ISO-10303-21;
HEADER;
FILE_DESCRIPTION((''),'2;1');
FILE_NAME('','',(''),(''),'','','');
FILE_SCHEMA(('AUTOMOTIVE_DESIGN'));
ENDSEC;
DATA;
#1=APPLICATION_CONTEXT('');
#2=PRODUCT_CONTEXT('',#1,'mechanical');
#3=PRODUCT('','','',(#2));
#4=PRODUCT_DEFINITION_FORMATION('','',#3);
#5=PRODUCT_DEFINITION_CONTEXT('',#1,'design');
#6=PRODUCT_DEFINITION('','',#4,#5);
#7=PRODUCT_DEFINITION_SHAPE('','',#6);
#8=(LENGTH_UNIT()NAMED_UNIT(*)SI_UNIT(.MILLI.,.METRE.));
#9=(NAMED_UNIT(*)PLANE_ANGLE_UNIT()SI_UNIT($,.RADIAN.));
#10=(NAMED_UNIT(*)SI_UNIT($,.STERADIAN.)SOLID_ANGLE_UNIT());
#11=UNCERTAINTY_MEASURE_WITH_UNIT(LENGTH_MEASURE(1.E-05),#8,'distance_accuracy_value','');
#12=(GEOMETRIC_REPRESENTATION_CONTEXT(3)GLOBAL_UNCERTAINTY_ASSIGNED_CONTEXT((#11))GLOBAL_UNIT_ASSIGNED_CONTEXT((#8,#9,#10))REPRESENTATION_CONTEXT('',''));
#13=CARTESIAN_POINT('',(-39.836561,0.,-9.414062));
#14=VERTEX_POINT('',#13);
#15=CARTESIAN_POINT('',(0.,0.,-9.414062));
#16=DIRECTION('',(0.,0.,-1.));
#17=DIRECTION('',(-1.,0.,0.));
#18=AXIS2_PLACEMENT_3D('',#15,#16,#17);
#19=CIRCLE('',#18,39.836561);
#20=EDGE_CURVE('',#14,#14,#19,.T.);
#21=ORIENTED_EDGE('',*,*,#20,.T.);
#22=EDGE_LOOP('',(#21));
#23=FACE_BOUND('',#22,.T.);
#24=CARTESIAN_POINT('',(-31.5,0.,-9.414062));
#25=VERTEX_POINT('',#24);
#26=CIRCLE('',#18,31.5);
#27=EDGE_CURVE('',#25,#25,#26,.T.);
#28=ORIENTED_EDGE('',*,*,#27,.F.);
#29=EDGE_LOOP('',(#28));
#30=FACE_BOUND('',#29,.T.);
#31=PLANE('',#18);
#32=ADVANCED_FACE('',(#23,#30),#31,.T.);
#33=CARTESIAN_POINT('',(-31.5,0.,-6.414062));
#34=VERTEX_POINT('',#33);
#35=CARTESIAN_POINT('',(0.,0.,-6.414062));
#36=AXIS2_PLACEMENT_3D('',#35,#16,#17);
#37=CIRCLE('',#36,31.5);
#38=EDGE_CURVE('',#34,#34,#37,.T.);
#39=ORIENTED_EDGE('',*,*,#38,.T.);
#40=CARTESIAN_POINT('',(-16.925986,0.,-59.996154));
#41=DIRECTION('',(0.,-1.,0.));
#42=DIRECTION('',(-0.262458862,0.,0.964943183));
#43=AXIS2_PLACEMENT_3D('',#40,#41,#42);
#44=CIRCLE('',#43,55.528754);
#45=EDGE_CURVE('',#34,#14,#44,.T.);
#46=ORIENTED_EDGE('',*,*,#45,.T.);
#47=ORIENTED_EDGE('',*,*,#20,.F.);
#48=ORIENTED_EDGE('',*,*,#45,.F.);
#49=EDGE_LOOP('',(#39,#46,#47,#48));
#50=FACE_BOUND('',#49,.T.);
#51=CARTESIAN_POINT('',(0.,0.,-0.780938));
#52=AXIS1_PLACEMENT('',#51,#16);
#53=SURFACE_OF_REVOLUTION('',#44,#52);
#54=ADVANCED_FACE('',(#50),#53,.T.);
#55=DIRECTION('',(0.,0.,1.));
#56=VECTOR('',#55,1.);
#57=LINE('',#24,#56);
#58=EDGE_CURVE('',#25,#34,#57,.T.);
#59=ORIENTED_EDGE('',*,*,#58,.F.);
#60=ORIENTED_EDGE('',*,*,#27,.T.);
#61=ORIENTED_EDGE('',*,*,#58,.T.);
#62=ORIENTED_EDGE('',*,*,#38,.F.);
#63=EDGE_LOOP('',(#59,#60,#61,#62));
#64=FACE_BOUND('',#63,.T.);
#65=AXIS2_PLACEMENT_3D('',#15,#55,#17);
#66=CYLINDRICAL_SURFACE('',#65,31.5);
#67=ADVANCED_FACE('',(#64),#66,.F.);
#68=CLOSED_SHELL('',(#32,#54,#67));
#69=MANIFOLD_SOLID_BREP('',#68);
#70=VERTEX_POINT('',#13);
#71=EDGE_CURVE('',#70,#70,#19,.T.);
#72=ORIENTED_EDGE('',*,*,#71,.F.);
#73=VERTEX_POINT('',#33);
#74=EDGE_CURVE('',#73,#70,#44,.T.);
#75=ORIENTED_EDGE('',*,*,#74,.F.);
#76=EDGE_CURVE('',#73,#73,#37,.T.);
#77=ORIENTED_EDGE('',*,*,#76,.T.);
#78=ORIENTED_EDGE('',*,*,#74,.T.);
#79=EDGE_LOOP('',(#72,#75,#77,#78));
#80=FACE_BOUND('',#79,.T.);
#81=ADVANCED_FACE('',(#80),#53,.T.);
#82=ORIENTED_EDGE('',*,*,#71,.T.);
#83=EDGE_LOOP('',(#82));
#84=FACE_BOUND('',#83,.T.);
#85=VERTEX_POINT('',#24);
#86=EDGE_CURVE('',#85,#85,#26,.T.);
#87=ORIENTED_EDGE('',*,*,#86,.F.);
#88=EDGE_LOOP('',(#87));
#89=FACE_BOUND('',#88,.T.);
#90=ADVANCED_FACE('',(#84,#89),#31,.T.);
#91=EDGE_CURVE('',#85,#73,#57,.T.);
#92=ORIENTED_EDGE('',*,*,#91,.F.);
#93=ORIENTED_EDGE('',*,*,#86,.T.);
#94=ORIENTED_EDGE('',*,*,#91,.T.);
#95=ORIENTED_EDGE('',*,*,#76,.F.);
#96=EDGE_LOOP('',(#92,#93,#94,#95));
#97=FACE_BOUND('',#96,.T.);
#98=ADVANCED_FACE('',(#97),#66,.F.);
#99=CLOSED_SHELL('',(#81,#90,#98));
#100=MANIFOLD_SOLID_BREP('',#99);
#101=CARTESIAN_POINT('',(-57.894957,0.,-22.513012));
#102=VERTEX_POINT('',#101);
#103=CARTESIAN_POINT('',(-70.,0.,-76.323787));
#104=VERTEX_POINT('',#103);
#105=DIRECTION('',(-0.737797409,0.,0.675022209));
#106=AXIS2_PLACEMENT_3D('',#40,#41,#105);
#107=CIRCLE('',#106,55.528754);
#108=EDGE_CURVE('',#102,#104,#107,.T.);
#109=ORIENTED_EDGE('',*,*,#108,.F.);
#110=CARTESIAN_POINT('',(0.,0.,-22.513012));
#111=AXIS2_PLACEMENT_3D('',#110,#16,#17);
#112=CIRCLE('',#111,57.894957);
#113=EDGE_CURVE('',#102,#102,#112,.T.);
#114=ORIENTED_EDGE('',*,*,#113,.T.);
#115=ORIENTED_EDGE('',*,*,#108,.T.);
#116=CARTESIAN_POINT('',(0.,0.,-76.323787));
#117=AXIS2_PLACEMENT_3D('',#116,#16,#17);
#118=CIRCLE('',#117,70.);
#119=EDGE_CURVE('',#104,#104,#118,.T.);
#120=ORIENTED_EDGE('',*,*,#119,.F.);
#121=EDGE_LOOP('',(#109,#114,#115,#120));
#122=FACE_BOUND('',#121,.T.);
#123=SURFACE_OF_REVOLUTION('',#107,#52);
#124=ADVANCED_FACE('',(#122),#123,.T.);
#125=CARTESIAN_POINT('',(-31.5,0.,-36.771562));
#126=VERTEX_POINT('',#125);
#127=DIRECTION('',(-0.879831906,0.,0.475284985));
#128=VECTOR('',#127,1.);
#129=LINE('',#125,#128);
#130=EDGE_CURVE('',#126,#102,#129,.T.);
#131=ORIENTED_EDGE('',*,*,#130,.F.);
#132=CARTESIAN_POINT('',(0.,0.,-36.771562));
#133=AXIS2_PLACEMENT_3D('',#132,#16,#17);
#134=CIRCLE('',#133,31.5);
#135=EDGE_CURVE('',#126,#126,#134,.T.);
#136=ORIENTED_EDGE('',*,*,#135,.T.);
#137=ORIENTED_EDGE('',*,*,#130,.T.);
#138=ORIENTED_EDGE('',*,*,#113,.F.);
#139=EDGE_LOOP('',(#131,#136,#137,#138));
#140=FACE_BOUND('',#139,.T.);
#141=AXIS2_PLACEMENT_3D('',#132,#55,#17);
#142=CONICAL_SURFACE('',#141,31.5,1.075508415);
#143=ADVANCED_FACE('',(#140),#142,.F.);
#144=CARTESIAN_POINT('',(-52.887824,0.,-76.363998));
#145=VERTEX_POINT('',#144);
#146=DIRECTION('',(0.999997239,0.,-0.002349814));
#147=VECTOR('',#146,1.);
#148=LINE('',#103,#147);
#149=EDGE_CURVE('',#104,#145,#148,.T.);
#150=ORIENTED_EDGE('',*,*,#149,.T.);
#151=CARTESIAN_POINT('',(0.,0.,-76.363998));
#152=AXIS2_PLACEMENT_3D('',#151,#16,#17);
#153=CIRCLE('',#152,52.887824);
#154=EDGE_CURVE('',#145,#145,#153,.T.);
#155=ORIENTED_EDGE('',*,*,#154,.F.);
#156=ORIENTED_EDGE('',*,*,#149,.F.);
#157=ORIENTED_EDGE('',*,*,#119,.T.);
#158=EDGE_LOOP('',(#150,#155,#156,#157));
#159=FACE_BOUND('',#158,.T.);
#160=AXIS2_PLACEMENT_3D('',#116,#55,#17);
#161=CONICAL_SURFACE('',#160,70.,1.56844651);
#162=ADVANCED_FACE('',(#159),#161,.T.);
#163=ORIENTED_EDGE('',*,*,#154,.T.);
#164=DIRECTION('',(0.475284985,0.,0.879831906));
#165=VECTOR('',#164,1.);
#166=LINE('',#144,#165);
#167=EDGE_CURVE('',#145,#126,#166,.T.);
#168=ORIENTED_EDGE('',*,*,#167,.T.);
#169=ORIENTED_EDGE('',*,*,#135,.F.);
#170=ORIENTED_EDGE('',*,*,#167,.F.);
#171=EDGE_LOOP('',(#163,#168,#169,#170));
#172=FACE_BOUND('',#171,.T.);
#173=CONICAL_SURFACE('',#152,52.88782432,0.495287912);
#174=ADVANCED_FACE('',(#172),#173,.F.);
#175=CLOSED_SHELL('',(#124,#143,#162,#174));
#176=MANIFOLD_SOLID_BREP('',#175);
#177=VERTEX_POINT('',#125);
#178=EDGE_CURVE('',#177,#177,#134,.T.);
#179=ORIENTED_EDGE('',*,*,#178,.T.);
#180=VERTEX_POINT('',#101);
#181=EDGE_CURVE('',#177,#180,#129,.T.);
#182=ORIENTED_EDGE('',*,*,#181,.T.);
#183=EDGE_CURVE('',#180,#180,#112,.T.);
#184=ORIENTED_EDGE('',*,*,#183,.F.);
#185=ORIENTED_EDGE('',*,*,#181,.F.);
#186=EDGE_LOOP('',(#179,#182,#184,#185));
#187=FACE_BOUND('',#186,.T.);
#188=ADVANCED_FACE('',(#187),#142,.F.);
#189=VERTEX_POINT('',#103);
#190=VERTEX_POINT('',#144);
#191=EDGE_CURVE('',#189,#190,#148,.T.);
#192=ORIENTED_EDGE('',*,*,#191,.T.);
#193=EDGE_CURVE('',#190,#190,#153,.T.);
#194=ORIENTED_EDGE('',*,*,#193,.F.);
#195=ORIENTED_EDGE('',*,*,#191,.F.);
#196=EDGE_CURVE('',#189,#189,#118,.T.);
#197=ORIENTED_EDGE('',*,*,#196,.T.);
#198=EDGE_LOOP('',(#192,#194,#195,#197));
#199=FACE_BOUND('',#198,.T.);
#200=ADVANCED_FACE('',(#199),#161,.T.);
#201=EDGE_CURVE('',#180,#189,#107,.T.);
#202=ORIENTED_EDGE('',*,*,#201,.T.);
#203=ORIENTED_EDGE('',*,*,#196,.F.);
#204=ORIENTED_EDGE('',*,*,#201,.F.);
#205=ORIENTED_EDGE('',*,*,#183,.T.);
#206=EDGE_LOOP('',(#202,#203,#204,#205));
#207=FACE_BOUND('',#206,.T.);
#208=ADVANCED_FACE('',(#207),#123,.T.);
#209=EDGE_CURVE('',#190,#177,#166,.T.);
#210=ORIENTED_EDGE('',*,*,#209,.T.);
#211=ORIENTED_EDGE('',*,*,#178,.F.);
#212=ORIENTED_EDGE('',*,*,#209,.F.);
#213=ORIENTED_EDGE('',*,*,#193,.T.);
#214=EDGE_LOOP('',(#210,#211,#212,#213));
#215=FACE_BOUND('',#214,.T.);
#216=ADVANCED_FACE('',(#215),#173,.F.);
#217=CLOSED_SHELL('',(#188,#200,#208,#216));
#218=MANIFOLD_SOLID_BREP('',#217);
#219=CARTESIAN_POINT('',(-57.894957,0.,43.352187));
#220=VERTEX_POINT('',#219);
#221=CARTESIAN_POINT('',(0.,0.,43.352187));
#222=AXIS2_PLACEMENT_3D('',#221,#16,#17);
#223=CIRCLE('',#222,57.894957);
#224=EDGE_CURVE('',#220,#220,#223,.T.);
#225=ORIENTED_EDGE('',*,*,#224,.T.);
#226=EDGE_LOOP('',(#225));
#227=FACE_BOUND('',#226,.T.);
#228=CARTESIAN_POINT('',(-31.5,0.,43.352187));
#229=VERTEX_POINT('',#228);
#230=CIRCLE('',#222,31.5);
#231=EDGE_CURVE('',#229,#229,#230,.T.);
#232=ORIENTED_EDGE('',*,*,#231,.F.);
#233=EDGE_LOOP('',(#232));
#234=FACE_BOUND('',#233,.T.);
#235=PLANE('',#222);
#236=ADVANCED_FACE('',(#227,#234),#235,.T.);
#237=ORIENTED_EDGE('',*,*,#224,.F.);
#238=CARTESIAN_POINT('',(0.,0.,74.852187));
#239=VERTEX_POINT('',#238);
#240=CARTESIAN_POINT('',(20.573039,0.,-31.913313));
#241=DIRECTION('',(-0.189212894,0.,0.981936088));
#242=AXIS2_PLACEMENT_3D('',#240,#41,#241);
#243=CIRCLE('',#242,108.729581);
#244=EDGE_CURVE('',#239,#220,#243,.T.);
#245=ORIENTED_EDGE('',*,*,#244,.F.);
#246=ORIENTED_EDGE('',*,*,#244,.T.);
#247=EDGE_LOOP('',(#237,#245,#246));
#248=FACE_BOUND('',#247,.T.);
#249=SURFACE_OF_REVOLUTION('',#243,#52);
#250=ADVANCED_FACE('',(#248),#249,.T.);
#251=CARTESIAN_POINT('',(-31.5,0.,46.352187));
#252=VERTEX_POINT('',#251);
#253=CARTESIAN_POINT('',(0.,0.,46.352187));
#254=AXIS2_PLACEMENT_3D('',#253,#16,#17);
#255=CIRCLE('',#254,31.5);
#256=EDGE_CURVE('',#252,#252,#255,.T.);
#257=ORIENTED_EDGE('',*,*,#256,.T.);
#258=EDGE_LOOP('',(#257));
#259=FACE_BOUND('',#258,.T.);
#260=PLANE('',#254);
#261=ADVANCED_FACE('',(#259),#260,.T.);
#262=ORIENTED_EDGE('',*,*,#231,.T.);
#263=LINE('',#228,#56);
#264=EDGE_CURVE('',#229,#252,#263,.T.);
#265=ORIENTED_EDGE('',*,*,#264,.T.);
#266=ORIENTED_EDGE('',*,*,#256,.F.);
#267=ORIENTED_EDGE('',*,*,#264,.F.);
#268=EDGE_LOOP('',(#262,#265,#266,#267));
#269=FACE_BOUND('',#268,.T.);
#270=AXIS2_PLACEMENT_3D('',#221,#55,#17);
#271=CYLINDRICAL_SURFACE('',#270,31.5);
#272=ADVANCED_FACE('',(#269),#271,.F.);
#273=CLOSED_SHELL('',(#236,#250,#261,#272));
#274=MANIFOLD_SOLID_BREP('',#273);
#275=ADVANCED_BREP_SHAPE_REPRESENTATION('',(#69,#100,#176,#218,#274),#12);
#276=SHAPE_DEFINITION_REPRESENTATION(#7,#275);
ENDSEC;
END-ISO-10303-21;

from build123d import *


# Not quite as in the source:
# - the program builds the solid bodies; features that only make, move or delete a surface that nothing else refers to are left out


with BuildPart() as f1:
    # F0 (on Front) → F1 (revolve)
    with BuildSketch(Plane.XZ):
        with BuildLine():
            Line((-31.5, -36.7715619504), (-57.8949571854, -22.5130124036))
            ThreePointArc((-57.8949571854, -22.5130124036), (-71.100893869, -47.8091979463), (-70, -76.3237871839))
            Line((-70, -76.3237871839), (-52.8878243203, -76.3639977286))
            Line((-52.8878243203, -76.3639977286), (-31.5, -36.7715619504))
        make_face()
    revolve(axis=Axis((0, 0, -0.7809376717), (0, 0, -1)))


with BuildPart() as f3:
    # F0 (on Front) → F3 (revolve)
    with BuildSketch(Plane.XZ):
        with BuildLine():
            Line((-31.5, -9.4140620232), (-31.5, -6.4140620232))
            ThreePointArc((-31.5, -6.4140620232), (-35.7282093513, -7.7475284985), (-39.836560988, -9.4140620232))
            Line((-39.836560988, -9.4140620232), (-31.5, -9.4140620232))
        make_face()
    revolve(axis=Axis((0, 0, -0.7809376717), (0, 0, -1)))


with BuildPart() as f3b:
    # F0 (on Front) → F3, piece 2 (revolve)
    with BuildSketch(Plane.XZ):
        with BuildLine():
            Line((-31.5, -36.7715619504), (-57.8949571854, -22.5130124036))
            ThreePointArc((-57.8949571854, -22.5130124036), (-71.100893869, -47.8091979463), (-70, -76.3237871839))
            Line((-70, -76.3237871839), (-52.8878243203, -76.3639977286))
            Line((-52.8878243203, -76.3639977286), (-31.5, -36.7715619504))
        make_face()
    revolve(axis=Axis((0, 0, -0.7809376717), (0, 0, -1)))


with BuildPart() as f3c:
    # F0 (on Front) → F3, piece 3 (revolve)
    with BuildSketch(Plane.XZ):
        with BuildLine():
            Line((0, 46.3521866798), (0, 74.8521866798))
            ThreePointArc((0, 74.8521866798), (-31.3917968408, 63.5946851026), (-57.8949571854, 43.3521866798))
            Line((-57.8949571854, 43.3521866798), (-31.5, 43.3521866798))
            Line((-31.5, 43.3521866798), (-31.5, 46.3521866798))
            Line((-31.5, 46.3521866798), (0, 46.3521866798))
        make_face()
    revolve(axis=Axis((0, 0, -0.7809376717), (0, 0, -1)))


with BuildPart() as f4:
    # F0 (on Front) → F4 (revolve)
    with BuildSketch(Plane.XZ):
        with BuildLine():
            Line((-31.5, -9.4140620232), (-31.5, -6.4140620232))
            ThreePointArc((-31.5, -6.4140620232), (-35.7282093513, -7.7475284985), (-39.836560988, -9.4140620232))
            Line((-39.836560988, -9.4140620232), (-31.5, -9.4140620232))
        make_face()
    revolve(axis=Axis((0, 0, -0.7809376717), (0, 0, -1)))


solid = Compound([f1.part, f3.part, f3b.part, f3c.part, f4.part])
